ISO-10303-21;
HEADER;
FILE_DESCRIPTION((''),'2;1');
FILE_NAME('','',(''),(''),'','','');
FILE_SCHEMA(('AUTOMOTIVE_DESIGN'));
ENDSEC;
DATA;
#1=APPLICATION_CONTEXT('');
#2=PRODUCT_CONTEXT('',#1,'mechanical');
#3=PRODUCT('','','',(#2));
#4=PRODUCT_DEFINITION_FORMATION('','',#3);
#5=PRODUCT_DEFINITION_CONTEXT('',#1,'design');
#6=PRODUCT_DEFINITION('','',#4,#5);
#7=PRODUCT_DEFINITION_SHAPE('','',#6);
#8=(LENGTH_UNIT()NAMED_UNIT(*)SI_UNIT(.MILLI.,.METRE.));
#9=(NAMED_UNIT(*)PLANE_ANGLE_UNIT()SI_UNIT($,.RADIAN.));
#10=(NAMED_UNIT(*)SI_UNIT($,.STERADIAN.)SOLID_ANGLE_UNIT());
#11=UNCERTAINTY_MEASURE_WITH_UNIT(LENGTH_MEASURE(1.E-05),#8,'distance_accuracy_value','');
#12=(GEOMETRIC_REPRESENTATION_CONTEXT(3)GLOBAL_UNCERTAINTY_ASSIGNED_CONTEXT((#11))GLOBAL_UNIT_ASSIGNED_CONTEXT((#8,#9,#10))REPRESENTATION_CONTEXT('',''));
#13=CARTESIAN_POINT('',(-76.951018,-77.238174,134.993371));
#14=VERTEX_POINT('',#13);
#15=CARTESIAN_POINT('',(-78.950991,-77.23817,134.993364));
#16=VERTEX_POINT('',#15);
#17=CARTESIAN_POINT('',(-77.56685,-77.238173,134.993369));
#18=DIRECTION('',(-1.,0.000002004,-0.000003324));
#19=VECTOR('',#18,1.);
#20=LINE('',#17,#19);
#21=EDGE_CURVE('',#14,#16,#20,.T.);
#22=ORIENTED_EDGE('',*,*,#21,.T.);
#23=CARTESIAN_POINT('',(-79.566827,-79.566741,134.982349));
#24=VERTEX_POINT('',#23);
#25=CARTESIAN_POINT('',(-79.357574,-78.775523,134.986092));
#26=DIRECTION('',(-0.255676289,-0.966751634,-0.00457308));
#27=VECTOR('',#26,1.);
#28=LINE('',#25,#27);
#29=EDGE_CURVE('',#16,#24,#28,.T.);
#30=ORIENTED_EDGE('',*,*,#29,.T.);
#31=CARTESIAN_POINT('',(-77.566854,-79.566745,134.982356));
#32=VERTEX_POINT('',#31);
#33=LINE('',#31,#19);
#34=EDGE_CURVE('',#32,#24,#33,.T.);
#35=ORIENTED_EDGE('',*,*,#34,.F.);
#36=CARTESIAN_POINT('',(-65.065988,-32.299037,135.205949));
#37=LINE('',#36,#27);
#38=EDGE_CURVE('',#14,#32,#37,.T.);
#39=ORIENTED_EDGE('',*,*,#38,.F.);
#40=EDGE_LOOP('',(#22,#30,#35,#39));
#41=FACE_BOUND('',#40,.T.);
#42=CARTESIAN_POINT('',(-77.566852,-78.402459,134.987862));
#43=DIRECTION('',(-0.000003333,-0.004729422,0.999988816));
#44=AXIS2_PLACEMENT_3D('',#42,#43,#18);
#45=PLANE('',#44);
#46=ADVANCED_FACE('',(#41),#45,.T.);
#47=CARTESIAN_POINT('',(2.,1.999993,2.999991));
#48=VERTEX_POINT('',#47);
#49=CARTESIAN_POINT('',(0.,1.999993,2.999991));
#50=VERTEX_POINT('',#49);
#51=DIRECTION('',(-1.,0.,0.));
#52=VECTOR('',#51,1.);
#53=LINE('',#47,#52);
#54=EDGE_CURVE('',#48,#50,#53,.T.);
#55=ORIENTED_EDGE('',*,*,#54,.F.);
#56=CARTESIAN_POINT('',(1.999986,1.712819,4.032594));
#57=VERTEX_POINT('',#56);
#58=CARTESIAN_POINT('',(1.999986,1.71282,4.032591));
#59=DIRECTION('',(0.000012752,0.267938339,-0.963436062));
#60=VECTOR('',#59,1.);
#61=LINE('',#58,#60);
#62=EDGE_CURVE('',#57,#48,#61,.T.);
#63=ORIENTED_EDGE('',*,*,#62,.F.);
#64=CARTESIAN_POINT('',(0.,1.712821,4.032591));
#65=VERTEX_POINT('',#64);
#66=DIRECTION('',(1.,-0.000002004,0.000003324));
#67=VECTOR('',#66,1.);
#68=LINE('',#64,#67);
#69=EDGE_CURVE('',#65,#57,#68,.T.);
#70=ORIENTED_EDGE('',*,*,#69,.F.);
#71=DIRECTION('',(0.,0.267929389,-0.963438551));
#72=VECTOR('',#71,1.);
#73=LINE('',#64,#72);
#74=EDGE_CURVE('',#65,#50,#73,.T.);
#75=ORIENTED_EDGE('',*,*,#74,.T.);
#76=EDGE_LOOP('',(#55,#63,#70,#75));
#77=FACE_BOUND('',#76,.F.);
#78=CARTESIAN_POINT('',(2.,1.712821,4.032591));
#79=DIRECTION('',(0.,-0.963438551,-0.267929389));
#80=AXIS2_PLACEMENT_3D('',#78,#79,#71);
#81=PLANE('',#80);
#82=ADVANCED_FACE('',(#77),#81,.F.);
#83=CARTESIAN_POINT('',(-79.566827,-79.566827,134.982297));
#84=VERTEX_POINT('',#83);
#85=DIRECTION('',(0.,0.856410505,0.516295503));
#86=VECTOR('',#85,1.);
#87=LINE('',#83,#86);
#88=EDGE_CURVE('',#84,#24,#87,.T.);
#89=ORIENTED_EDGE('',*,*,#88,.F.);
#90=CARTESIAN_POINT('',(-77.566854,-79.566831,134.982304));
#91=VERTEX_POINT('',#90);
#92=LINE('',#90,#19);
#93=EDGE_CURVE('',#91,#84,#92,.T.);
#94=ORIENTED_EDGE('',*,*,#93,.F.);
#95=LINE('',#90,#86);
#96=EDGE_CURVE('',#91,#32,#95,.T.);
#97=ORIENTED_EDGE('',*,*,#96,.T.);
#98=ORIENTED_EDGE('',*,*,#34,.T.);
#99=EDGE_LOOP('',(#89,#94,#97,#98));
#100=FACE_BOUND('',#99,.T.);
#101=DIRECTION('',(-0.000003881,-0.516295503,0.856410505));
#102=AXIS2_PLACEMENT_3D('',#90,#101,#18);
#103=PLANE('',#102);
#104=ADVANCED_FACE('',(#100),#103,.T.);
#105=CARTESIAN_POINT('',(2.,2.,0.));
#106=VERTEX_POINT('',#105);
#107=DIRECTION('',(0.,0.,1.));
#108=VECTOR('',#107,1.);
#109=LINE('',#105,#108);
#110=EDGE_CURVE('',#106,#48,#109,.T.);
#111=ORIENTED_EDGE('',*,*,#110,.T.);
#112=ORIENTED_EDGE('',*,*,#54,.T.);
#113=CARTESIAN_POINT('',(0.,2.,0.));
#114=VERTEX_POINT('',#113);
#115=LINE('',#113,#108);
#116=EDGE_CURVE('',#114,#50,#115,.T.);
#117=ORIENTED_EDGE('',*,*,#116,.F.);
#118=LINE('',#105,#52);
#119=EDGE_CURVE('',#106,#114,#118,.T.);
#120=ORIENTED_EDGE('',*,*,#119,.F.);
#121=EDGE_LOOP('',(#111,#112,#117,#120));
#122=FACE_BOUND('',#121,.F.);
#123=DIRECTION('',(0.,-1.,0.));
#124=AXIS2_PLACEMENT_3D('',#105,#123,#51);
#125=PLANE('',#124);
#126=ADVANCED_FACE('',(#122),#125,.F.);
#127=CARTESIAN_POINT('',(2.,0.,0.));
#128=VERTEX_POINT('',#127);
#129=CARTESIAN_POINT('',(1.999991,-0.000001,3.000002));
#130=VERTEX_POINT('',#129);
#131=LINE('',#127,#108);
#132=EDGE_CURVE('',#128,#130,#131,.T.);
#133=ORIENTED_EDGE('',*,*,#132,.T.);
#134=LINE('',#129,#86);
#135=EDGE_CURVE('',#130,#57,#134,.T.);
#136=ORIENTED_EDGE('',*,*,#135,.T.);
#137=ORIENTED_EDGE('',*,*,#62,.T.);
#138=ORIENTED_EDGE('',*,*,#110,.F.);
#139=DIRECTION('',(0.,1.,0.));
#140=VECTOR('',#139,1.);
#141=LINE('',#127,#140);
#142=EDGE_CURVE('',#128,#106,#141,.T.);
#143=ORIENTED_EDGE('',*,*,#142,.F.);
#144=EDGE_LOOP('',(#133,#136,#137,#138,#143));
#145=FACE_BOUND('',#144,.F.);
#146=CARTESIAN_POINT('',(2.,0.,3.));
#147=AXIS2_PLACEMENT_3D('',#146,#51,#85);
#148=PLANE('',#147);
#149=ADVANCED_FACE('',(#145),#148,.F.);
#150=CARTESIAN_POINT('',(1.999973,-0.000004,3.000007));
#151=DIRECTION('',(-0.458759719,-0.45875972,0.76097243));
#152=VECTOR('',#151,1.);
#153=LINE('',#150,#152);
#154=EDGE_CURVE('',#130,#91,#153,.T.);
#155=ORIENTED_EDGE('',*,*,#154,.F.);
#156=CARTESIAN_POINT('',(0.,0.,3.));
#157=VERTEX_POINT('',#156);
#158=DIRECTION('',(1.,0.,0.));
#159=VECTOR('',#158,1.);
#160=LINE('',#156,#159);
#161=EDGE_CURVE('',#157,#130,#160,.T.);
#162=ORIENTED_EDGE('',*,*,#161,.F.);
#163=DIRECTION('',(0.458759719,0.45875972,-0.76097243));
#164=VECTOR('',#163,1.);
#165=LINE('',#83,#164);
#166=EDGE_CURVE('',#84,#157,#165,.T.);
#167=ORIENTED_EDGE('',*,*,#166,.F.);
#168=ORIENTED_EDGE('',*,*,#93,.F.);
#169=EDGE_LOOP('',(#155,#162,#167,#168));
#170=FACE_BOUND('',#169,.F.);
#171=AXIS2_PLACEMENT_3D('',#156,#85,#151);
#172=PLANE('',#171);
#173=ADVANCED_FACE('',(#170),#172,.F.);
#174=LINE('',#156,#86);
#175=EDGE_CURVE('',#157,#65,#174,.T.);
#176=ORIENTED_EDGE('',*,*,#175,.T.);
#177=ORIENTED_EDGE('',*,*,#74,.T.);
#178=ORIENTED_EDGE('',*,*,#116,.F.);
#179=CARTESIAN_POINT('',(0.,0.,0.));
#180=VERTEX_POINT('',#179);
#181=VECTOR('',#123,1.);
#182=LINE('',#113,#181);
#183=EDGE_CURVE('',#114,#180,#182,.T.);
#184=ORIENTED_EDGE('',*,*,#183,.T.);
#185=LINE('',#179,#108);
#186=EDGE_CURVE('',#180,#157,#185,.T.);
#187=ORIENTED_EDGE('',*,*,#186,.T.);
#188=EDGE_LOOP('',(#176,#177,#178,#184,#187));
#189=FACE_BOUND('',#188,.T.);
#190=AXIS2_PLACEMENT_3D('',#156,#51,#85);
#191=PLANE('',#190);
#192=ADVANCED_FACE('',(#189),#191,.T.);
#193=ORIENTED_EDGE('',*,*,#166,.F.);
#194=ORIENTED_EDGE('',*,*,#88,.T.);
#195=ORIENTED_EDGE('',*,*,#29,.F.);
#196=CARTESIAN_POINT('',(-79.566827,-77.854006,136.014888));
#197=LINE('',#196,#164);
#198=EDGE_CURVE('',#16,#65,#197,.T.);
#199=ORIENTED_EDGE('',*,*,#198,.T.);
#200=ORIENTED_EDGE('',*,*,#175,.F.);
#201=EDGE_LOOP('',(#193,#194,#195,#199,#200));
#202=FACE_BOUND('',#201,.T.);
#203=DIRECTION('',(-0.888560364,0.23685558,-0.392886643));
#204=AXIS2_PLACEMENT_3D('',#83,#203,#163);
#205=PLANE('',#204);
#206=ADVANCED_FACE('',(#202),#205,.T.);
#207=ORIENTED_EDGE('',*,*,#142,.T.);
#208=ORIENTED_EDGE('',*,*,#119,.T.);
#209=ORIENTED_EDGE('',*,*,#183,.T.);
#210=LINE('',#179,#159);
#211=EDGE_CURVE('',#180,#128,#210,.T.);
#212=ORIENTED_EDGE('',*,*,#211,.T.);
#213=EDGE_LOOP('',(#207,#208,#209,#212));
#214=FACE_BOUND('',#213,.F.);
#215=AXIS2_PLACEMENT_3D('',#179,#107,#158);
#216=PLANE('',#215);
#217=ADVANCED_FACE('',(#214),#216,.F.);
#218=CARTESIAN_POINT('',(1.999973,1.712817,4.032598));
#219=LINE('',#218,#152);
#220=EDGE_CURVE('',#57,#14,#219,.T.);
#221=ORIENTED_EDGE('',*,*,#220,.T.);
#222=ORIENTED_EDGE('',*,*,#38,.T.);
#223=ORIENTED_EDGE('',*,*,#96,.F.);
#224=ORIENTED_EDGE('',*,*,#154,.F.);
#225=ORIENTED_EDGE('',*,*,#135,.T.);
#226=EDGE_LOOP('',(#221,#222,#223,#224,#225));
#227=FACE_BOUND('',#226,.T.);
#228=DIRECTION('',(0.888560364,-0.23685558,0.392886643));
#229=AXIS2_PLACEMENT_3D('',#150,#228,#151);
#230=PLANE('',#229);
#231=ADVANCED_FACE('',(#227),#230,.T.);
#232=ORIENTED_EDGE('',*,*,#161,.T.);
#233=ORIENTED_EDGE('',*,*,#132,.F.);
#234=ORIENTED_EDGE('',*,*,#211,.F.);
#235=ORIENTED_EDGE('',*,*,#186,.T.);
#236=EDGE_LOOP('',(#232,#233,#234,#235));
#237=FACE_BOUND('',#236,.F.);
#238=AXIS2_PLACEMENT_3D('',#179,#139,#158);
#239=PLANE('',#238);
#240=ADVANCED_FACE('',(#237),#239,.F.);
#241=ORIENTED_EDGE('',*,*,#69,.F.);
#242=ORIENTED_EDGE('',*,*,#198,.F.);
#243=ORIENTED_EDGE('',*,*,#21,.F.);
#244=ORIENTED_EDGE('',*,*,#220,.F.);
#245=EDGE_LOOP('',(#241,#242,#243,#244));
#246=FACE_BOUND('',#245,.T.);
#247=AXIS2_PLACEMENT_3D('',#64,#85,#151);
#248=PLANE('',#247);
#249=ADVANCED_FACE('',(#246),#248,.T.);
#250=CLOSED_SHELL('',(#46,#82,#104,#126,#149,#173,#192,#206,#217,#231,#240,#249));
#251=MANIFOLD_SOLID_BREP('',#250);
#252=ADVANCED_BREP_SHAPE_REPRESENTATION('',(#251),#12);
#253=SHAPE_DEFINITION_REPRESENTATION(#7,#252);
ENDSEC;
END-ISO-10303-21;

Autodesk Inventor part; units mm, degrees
ref_plane "YZ Plane" through (0, 0, 0) normal (1, 0, 0) x (0, 1, 0)
sketch "Skizze1" plane through (0, 0, 0) normal (0, 0, 1) x (1, 0, 0)
  line L0 (0, 0) -> (2, 0)
  line L1 (2, 0) -> (2, 2)
  line L2 (2, 2) -> (0, 2)
  line L3 (0, 2) -> (0, 0)
  dimension "d0" = 2
  dimension "d1" = 2
extrude "Extrusion1" add sketch "Skizze1" along normal blind 3
sketch "Skizze2" plane through (0, 0, 3) normal (0, 0, 1) x (1, 0, 0)
  point P0 (0, 0)
ref_plane "Arbeitsebene1" through (0, 0, 3) normal (-0.7071068, 0.7071068, 0) x (0.7071068, 0.7071068, 0)
sketch "Skizze3" plane through (0, 0, 3) normal (-0.7071068, 0.7071068, 0) x (0.7071068, 0.7071068, 0)
  line L0 (0, 0) -> (1.4142, 0) projected
  line L1 (0, 0) -> (-112.5245, -131.9823)
  line L2 (0, 0) -> (173.439, 0) construction
  line L3 (2.8284, 3) -> (2.8284, 0) projected
  line L4 (2.8284, 0) -> (-109.6961, -131.9823)
  line L5 (2.8284, 0) -> (176.2674, 0) construction
  line L6 (-109.6961, -131.9823) -> (-112.5245, -131.9823)
  line L7 (1.4142, 0) -> (2.8284, 0) projected
  line L8 (2.8284, 0) -> (0, 0)
  point P0 (0, 3)
  dimension "d4" = 173.439
  dimension "d5" = 130.45
  dimension "d6" = 173.439
  dimension "d7" = 130.45
ref_plane "Arbeitsebene2" through (0, 0, 3) normal (0, 0.8564105, 0.5162955) x (-0.4587597, -0.4587597, 0.7609724)
sketch "Skizze4" plane through (0, 0, 3) normal (0, 0.8564105, 0.5162955) x (-0.4587597, -0.4587597, 0.7609724)
  line L0 (0, 0) -> (-0.9175, 1.7771) projected
  line L1 (0, 0) -> (-0.9175, 1.7771)
  line L2 (-0.9175, 1.7771) -> (172.5215, 1.7771)
  line L3 (172.5215, 1.7771) -> (173.439, 0)
  line L4 (173.439, 0) -> (0, 0)
  point P0 (-2.2829, -1.1787)
  dimension "d9" = 173.439
extrude "Extrusion2" add sketch "Skizze4" along normal blind 2
sketch "Skizze5" plane through (-77.5668, -79.5668, 134.9823) normal (0.8885604, -0.2368556, 0.3928866) x (0.4587597, 0.4587597, -0.7609724)
  line L0 (172.5215, 0) -> (-0.9175, 0) projected
  line L1 (0.0005, 0) -> (1.3553, 2)
  line L2 (0, 2) -> (173.439, 2) projected
  line L3 (1.3553, 2) -> (0, 2)
  line L4 (0, 0) -> (0, 2) projected
  line L5 (0, 2) -> (0, 0)
  point P0 (174.8044, -1.5489)
sketch "Skizze6" plane through (0, 0, 3) normal (0, -0.8564105, -0.5162955) x (0.8885604, -0.2368556, 0.3928866)
  line L0 (0, 0) -> (0, 173.439) projected
  line L1 (1.7771, 172.5215) -> (0, 173.439)
  point P0 (-1.1787, -2.2829)
sketch "Skizze7" plane through (0, 1.7128, 4.0326) normal (0, 0.8564105, 0.5162955) x (0.8885604, -0.2368556, 0.3928866)
  line L0 (0, 0) -> (0, -173.439) projected
  line L1 (0, -172.1027) -> (1.781, -171.1647)
  point P0 (-1.1787, 2.2829)
sketch "Skizze8" plane through (0, 0, 3) normal (-0.8885604, 0.2368556, -0.3928866) x (-0.4587597, -0.4587597, 0.7609724)
  line L0 (0, 2) -> (173.439, 2) projected
  line L1 (0, 0) -> (173.439, 0) projected
  line L2 (172.1026, 2) -> (173.439, 0)
  point P0 (-2.2829, -1.5489)
chamfer "Fase1" distance 1.1929 distance2 2 1 edges at (-78.5668, -77.854, 136.0149) measured on face at (-25.1889, -24.8095, 48.0267)
ref_plane "Arbeitsebene3" through (2, 0, 3) normal (-1, 0, 0) x (0, 0.8564105, 0.5162955)
sketch "Skizze12" plane through (2, 0, 3) normal (-1, 0, 0) x (0, 0.8564105, 0.5162955)
  line L0 (0, 0) -> (1.7128, 1.0326) projected
  line L1 (0, 0) -> (2, 0)
  line L2 (-1.5489, 2.5692) -> (0, 0) projected
  line L3 (0, 0) -> (1.7128, 1.0326)
  line L4 (2, 0) -> (1.7128, 1.0326)
extrude "Extrusion6" add sketch "Skizze12" along normal blind 2
properties part number "FOVStick"
